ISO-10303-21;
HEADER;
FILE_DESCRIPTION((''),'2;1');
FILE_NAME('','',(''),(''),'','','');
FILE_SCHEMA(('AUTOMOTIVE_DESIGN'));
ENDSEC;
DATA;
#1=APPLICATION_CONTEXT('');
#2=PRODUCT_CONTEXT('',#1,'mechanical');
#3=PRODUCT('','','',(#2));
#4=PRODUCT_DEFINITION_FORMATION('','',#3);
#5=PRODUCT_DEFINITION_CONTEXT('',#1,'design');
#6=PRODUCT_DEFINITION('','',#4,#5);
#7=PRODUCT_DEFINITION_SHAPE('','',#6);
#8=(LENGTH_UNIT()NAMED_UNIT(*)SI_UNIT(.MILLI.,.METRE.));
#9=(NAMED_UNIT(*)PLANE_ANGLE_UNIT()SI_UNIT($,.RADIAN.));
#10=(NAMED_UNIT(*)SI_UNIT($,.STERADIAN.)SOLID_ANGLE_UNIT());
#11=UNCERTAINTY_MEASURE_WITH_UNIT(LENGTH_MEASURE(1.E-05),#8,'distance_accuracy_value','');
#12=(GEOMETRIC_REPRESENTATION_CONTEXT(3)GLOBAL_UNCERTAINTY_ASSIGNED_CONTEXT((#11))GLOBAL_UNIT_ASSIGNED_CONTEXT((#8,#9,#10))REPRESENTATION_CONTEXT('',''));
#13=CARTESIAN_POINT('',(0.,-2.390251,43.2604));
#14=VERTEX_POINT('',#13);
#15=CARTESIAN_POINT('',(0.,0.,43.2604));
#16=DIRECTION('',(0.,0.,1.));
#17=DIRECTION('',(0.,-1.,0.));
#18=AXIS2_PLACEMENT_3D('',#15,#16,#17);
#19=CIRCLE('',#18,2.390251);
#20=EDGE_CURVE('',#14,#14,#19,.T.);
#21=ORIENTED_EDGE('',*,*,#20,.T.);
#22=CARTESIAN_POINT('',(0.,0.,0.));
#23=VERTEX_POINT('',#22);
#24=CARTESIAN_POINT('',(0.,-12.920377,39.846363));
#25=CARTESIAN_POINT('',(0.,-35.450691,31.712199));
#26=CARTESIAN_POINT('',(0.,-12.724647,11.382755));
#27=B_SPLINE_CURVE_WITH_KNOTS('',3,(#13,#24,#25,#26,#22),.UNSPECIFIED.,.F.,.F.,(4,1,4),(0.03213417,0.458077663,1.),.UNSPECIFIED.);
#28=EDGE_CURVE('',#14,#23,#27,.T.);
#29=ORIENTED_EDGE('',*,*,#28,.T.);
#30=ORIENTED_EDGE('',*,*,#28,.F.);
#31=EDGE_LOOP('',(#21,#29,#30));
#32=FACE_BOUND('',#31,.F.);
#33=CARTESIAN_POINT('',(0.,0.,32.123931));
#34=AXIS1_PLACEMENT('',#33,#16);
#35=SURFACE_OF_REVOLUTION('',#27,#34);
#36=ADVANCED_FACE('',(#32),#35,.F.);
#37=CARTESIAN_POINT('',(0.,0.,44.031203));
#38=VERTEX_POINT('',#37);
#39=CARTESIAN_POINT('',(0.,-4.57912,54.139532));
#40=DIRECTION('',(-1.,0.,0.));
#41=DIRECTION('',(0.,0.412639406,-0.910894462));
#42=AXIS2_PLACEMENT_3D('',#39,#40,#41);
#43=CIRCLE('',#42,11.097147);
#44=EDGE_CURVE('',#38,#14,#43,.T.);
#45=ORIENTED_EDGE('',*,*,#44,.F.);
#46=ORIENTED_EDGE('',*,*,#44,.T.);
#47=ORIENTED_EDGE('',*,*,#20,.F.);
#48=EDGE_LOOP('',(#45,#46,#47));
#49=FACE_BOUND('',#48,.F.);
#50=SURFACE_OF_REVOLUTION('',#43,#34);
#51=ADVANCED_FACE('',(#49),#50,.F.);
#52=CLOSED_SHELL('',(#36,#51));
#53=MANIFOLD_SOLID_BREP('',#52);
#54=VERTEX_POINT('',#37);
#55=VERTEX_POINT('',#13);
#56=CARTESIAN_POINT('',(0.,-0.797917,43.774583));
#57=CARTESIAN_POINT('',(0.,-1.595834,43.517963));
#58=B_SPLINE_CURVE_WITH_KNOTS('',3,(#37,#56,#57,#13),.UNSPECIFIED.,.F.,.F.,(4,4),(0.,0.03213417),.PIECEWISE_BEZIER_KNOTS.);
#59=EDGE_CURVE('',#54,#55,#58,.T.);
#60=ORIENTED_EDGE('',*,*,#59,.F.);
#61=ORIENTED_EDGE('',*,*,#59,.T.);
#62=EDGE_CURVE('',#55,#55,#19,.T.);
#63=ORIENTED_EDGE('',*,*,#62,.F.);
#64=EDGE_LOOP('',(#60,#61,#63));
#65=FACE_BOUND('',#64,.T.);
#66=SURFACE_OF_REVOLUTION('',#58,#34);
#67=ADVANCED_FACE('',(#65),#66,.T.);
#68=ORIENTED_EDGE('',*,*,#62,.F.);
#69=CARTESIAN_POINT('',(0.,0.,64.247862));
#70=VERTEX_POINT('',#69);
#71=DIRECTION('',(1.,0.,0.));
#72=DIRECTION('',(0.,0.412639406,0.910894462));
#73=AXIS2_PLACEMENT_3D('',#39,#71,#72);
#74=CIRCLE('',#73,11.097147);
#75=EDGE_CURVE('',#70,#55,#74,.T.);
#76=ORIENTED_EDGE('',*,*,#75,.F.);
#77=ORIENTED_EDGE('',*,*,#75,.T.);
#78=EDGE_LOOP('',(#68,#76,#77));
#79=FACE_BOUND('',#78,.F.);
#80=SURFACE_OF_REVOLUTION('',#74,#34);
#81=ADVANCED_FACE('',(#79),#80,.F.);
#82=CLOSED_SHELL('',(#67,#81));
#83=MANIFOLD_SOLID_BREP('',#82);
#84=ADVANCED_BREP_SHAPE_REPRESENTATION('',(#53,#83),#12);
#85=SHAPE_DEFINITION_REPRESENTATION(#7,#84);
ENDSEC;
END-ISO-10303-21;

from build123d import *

# Parameters (mm, degrees)
F2_R     = 5.8477712981
F3_DEPTH = 25.4


with BuildPart() as f1:
    # F0 (on Right) → F1 (revolve)
    with BuildSketch(Plane.YZ):
        with BuildLine():
            add(Edge.make_bspline(
                [(-2.3902509112, 43.2604000923), (-12.9203770861, 39.8463630286), (-35.4506907368, 31.7121985459), (-12.7246468102, 11.3827549671), (0, 0)],
                knots=[0.0321341703, 0.0321341703, 0.0321341703, 0.0321341703, 0.4580776627, 1, 1, 1, 1], degree=3))
            Line((0, 0), (0, 44.0312027931))
            ThreePointArc((0, 44.0312027931), (-1.1732495857, 43.5779646048), (-2.3902509112, 43.2604000923))
        make_face()
    revolve(axis=Axis((0, 0, 32.1239307523), (0, 0, 1)))

    # F2 (on Top) → F3 (cut)
    with BuildSketch(Plane.XY):
        Circle(F2_R)
    extrude(amount=-F3_DEPTH, mode=Mode.SUBTRACT)


with BuildPart() as f1b:
    # F0 (on Right) → F1, piece 2 (revolve)
    with BuildSketch(Plane.YZ):
        with BuildLine():
            add(Edge.make_bspline(
                [(0, 44.0312027931), (-0.7979168183, 43.7745829015), (-1.5958336367, 43.5179630098), (-2.3902509112, 43.2604000923)],
                knots=[0, 0, 0, 0, 0.0321341703, 0.0321341703, 0.0321341703, 0.0321341703], degree=3))
            Line((0, 44.0312027931), (0, 64.2478615046))
            ThreePointArc((0, 64.2478615046), (-15.6049896856, 55.3952626356), (-2.3902509112, 43.2604000923))
        make_face()
    revolve(axis=Axis((0, 0, 32.1239307523), (0, 0, 1)))


solid = Compound([f1.part, f1b.part])
